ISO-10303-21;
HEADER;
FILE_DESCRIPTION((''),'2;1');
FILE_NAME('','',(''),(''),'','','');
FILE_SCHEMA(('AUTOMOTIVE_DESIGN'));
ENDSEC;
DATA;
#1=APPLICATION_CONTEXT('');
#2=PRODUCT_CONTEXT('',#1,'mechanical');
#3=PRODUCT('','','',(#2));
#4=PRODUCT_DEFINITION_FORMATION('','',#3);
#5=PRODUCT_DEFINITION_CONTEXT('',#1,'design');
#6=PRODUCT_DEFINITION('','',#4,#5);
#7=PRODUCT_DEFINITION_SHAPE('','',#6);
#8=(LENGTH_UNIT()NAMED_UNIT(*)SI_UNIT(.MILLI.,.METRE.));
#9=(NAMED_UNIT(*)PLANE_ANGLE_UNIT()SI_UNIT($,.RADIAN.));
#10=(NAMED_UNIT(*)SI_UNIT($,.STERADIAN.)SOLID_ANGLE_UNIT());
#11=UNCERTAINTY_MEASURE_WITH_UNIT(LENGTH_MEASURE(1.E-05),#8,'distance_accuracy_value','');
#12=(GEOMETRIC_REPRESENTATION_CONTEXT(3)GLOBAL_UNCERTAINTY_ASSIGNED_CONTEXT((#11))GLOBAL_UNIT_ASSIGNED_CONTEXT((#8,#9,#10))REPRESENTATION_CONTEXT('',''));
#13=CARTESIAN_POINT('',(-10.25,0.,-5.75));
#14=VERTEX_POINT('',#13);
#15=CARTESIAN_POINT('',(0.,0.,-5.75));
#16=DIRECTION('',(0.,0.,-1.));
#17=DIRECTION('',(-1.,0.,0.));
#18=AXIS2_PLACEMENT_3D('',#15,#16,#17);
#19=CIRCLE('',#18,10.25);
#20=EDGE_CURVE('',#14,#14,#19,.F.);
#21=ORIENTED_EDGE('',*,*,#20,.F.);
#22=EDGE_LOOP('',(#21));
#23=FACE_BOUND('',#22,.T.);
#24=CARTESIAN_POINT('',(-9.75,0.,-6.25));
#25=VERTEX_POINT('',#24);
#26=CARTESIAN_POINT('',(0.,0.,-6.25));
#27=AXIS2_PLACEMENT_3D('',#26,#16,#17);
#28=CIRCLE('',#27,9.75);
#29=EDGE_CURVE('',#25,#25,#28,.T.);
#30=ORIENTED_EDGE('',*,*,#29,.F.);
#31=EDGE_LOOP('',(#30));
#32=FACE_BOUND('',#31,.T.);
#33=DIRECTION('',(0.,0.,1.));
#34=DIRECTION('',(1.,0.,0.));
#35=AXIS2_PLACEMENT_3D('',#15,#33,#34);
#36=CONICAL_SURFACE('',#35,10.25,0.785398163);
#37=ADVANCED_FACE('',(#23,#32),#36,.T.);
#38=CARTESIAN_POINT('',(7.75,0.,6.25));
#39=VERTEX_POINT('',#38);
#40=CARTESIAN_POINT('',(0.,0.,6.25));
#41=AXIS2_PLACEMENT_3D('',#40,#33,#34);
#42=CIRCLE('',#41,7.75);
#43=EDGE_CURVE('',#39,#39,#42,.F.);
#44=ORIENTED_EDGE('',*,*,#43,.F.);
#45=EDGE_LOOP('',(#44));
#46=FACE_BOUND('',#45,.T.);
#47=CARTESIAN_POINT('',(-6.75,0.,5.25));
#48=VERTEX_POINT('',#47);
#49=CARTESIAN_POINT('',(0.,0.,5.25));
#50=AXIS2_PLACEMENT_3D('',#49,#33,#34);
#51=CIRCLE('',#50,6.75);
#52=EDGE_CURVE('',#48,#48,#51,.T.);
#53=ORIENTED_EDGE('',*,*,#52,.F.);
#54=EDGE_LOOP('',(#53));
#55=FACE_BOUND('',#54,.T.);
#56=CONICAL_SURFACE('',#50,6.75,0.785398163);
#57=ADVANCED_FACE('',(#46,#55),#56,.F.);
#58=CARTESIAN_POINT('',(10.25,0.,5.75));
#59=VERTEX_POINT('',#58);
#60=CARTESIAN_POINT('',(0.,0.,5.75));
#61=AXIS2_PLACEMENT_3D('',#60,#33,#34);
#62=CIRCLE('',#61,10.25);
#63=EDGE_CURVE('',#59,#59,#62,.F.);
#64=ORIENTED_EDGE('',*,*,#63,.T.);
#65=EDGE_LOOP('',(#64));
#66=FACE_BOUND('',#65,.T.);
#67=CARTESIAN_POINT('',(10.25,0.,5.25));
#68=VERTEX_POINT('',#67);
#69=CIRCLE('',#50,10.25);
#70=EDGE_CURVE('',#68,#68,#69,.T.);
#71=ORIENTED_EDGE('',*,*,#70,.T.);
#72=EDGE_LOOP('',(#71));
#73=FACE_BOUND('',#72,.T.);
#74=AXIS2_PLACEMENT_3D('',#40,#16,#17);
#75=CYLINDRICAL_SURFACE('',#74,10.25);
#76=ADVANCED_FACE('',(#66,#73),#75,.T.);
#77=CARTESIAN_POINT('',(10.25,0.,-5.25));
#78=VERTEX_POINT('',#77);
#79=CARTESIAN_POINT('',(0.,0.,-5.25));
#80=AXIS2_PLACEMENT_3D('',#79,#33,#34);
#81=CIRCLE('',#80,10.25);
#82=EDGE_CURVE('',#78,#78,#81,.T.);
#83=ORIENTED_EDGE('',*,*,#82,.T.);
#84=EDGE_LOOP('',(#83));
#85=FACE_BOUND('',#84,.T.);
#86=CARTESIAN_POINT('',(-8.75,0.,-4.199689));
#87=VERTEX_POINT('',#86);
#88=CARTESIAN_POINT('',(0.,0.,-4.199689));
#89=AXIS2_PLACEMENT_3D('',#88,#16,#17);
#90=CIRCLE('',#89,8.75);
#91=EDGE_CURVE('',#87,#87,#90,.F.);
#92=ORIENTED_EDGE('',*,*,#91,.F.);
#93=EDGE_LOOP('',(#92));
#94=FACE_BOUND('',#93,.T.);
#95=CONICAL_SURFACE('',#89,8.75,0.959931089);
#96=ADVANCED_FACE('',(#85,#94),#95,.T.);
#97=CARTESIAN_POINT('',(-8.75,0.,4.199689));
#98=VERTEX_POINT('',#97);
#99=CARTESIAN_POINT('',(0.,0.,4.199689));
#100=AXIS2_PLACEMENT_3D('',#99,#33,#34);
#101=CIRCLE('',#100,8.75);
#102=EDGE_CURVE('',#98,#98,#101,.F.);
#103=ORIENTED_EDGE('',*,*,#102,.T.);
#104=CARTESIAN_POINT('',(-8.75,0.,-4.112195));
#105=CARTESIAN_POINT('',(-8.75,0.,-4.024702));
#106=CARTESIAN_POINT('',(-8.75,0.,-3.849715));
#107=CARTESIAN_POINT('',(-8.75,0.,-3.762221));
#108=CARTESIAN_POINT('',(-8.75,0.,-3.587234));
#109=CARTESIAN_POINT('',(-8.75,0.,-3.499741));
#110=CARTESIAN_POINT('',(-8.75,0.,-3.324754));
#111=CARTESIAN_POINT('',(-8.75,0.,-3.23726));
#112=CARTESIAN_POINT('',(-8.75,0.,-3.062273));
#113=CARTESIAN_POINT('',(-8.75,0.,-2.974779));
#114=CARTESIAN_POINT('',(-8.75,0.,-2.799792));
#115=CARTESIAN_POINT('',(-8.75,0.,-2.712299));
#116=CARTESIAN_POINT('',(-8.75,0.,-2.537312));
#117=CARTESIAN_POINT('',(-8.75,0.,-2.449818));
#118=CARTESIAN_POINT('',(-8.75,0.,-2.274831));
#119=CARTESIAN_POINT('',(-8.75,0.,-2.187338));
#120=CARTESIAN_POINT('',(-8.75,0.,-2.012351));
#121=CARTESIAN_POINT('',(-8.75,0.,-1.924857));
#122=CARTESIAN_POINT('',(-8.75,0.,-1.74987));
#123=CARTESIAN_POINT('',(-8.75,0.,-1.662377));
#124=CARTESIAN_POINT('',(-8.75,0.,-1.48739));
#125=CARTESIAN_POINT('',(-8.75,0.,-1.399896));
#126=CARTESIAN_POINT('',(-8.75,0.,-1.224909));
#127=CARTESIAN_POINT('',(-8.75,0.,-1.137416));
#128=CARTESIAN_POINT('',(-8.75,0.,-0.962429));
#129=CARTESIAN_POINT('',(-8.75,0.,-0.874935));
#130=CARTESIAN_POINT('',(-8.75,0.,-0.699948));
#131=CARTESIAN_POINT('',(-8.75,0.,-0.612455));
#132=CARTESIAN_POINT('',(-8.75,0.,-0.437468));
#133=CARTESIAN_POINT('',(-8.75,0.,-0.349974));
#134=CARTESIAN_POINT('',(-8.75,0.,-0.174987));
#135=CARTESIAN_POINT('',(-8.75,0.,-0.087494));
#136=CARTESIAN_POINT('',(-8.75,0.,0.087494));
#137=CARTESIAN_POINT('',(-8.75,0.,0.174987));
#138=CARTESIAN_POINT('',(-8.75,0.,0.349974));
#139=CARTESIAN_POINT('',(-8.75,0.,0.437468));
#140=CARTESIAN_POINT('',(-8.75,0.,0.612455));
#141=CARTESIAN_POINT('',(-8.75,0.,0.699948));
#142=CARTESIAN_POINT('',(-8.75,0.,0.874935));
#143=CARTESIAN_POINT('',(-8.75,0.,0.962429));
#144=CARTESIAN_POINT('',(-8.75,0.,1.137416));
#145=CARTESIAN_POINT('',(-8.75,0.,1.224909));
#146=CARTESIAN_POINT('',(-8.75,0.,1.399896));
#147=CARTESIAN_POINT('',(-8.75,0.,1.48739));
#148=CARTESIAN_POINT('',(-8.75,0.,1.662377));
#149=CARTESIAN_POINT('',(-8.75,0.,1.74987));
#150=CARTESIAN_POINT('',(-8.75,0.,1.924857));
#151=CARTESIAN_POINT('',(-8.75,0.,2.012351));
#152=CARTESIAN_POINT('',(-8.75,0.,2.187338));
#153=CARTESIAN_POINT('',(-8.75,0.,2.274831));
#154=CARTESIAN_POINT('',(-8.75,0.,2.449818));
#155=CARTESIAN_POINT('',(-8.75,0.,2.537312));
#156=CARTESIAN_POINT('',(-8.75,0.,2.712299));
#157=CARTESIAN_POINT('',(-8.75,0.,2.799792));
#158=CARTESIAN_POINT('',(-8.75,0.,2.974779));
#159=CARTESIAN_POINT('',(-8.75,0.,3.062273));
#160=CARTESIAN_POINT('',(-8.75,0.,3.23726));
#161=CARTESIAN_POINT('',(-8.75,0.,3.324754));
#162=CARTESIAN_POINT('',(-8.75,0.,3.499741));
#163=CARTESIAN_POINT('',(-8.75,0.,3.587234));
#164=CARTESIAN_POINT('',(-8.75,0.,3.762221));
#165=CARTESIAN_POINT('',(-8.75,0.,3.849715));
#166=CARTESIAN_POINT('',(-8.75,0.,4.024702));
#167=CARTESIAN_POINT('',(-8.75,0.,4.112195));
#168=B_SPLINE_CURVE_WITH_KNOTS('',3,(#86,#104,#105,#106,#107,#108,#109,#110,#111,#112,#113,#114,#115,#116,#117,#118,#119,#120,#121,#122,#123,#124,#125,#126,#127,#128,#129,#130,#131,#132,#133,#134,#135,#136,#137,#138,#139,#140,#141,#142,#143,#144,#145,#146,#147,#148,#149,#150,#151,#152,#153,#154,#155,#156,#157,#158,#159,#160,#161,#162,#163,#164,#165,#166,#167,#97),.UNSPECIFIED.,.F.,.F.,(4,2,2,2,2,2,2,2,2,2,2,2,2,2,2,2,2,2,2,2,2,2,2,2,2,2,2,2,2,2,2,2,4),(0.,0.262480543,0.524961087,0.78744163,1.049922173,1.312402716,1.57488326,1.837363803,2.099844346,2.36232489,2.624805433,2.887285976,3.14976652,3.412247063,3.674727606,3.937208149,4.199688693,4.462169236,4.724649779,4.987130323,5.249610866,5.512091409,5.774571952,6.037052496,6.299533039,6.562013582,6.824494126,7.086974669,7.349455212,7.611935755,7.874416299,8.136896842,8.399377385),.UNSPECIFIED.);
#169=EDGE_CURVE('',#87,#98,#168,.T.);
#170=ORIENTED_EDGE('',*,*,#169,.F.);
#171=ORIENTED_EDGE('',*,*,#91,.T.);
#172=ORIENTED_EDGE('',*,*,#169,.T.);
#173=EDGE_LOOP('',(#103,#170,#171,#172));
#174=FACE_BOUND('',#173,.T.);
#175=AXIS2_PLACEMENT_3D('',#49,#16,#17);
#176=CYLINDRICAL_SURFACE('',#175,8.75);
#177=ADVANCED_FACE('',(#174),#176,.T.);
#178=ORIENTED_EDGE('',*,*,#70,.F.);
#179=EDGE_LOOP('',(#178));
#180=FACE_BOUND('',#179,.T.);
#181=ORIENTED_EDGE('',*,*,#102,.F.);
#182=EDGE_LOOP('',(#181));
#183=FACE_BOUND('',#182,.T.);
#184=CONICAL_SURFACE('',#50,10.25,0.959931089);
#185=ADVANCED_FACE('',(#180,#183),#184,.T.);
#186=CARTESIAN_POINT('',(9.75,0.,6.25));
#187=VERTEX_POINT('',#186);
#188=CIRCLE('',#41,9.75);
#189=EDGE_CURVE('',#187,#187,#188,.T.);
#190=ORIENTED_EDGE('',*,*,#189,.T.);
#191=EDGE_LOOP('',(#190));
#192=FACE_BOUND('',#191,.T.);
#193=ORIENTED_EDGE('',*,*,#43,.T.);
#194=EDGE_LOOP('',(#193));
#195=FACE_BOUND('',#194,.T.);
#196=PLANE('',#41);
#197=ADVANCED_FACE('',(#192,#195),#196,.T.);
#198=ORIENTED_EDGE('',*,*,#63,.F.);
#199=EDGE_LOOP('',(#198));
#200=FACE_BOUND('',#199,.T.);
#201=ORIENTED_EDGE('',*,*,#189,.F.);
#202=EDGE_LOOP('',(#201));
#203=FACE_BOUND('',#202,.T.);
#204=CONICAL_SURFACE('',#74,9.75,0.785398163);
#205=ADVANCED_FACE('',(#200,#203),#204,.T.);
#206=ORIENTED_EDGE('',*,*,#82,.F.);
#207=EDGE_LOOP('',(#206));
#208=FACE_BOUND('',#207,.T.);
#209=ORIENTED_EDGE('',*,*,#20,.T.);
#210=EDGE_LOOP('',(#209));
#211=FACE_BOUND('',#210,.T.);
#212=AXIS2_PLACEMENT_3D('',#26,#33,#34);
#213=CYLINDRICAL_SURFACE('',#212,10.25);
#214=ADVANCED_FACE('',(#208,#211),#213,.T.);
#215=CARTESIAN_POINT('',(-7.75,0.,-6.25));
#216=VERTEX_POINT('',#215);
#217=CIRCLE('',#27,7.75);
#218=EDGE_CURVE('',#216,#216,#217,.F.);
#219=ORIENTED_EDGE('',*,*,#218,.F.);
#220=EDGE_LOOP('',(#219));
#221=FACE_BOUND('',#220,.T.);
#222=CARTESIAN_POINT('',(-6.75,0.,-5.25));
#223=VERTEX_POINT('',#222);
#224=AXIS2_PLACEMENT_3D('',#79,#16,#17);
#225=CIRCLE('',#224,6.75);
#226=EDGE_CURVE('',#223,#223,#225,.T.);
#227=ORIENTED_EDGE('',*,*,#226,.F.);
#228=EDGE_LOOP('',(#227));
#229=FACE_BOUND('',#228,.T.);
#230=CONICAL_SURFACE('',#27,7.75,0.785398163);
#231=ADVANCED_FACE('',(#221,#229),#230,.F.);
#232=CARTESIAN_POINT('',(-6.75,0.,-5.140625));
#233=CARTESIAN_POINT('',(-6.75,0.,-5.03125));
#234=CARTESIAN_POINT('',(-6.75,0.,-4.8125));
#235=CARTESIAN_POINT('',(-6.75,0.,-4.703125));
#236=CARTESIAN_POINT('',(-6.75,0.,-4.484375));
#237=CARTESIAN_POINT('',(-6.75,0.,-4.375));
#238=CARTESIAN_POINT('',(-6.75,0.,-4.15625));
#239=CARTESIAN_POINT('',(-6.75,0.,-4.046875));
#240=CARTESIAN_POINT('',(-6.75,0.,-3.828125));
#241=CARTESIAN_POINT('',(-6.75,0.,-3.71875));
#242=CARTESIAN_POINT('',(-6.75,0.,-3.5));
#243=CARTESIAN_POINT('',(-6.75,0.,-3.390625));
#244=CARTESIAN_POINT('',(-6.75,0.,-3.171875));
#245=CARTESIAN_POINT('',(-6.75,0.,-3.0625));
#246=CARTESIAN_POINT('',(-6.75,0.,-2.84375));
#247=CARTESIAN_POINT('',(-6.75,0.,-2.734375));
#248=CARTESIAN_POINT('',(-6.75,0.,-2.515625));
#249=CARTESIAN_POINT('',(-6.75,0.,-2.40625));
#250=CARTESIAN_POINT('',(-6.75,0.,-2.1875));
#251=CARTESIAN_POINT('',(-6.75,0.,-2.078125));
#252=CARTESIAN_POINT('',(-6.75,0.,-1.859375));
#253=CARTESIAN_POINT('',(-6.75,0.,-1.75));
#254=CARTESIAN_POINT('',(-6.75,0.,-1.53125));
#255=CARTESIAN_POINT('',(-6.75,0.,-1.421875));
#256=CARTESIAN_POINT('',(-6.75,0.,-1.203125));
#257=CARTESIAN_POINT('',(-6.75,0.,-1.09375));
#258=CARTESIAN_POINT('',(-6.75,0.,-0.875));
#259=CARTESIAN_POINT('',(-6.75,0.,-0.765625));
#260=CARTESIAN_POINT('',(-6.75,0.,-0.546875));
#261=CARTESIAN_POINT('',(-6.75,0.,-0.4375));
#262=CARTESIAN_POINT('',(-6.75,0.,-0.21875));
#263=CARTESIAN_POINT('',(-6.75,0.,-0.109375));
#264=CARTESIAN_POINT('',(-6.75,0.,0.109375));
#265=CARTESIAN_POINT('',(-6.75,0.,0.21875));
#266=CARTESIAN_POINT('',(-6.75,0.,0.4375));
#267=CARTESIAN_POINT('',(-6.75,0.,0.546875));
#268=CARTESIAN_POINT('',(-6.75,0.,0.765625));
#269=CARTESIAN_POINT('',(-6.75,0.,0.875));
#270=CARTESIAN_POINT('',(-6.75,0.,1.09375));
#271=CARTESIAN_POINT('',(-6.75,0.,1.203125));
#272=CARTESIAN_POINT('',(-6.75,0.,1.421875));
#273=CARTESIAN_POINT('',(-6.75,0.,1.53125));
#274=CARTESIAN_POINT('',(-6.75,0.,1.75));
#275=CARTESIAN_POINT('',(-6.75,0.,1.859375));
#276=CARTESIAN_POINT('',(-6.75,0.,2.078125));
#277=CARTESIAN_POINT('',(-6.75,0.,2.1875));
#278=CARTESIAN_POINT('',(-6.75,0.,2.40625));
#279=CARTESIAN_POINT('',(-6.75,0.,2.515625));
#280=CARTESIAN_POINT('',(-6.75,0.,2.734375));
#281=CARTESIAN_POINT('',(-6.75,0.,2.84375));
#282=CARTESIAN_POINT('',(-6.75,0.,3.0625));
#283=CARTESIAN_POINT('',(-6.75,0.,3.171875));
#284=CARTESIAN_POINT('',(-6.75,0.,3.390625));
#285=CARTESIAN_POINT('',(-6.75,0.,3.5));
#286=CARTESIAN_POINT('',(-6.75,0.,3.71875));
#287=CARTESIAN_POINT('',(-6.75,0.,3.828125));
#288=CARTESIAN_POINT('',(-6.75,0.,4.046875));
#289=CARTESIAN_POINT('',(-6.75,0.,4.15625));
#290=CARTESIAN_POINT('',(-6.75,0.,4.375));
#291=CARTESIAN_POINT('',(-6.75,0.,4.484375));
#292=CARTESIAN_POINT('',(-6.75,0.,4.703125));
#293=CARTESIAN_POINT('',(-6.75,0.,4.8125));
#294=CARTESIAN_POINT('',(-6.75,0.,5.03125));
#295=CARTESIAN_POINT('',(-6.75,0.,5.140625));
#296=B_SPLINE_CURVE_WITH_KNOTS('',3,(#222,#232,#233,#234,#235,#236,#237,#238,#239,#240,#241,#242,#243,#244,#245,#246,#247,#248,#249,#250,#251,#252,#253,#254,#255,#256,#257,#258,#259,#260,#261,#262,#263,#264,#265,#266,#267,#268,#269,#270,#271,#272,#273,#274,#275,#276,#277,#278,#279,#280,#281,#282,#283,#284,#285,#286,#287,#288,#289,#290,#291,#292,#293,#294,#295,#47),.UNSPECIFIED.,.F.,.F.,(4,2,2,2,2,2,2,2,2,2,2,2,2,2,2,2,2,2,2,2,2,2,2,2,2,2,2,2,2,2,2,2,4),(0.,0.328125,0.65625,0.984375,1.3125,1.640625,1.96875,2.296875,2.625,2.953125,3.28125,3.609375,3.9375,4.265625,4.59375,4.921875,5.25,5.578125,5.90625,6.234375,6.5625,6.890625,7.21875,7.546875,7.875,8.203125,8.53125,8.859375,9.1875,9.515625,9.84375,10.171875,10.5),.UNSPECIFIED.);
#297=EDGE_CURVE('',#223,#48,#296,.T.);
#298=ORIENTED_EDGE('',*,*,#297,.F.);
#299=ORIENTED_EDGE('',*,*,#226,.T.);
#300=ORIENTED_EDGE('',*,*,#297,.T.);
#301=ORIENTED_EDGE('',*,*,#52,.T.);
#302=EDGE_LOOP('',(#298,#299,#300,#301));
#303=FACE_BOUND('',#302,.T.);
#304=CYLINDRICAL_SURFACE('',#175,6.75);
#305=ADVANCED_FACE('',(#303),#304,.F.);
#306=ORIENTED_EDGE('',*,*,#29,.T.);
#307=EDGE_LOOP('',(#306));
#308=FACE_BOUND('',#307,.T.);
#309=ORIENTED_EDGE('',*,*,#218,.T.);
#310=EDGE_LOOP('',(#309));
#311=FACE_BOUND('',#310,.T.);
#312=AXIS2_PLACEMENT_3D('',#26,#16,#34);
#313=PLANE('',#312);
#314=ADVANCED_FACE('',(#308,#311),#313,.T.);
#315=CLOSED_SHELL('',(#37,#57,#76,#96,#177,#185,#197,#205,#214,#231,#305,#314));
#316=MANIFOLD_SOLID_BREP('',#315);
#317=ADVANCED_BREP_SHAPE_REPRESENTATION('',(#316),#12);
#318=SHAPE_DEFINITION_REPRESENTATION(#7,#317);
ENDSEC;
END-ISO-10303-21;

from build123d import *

# Parameters (mm, degrees)
SKETCH1_R           = 8.75
SKETCH1_R_2         = 6.75
BOSS_EXTRUDE1_DEPTH = 5.25
SKETCH2_R           = 10.25
SKETCH2_R_2         = 6.75
BOSS_EXTRUDE2_DEPTH = 1
CHAMFER1_SIZE       = 1.050311307
CHAMFER1_SIZE_2     = 1.5
CHAMFER2_SIZE       = 1
CHAMFER3_SIZE       = 0.5


with BuildPart() as part:
    # Sketch1 → Boss-Extrude1 (new, symmetric)
    with BuildSketch(Plane.XY):
        with Locations(Location((0, 0, 0), (0, 0, 180))):
            Circle(SKETCH1_R)
        with Locations(Location((0, 0, 0), (0, 0, 180))):
            Circle(SKETCH1_R_2, mode=Mode.SUBTRACT)
    extrude(amount=BOSS_EXTRUDE1_DEPTH, both=True)

    # Sketch2 → Boss-Extrude2 (add)
    with BuildSketch(Plane.XY.offset(5.25)):
        Circle(SKETCH2_R)
        with Locations(Location((0, 0, 0), (0, 0, 180))):
            Circle(SKETCH2_R_2, mode=Mode.SUBTRACT)
    boss_extrude2 = extrude(amount=BOSS_EXTRUDE2_DEPTH)

    # Mirror1: Boss-Extrude2 across plane
    add(boss_extrude2.mirror(Plane.XY))

    # Chamfer1
    # the kernel refuses this chamfer: 1.5, 1.050311307 mm, written as the material it adds along each edge
    with BuildSketch(Plane(origin=(0, 0, -5.25), x_dir=(-1, 0, 0), z_dir=(0, 1, 0))) as chamfer1_piece_1_section:
        Polygon((8.75, CHAMFER1_SIZE), (8.75 + CHAMFER1_SIZE_2, 0), (8.75, 0), align=None)
    chamfer1_piece_1 = revolve(axis=Axis((0, 0, -5.25), (0, 0, 1)), mode=Mode.PRIVATE)
    chamfer1_piece_1 = chamfer1_piece_1 & Plane(origin=(0, 0, -4.738052243), x_dir=(1, 0, 0), z_dir=(0, 0, 1)) * Cylinder(10.25, 42, mode=Mode.PRIVATE)
    add(chamfer1_piece_1)
    with BuildSketch(Plane(origin=(0, 0, 5.25), x_dir=(-1, 0, 0), z_dir=(0, 1, 0))) as chamfer1_piece_2_section:
        Polygon((8.75, -CHAMFER1_SIZE), (8.75 + CHAMFER1_SIZE_2, 0), (8.75, 0), align=None)
    chamfer1_piece_2 = revolve(axis=Axis((0, 0, 5.25), (0, 0, 1)), mode=Mode.PRIVATE)
    chamfer1_piece_2 = chamfer1_piece_2 & Plane(origin=(0, 0, 4.738052243), x_dir=(1, 0, 0), z_dir=(0, 0, -1)) * Cylinder(10.25, 42, mode=Mode.PRIVATE)
    add(chamfer1_piece_2)

    # Chamfer2
    chamfer2_edges = [part.edges().sort_by_distance(p)[0] for p in [
        (6.75, 0, 6.25),
        (6.75, 0, -6.25),
    ]]
    chamfer(chamfer2_edges, length=CHAMFER2_SIZE)

    # Chamfer3
    chamfer3_edges = [part.edges().sort_by_distance(p)[0] for p in [
        (-10.25, 0, 6.25),
        (-10.25, 0, -6.25),
    ]]
    chamfer(chamfer3_edges, length=CHAMFER3_SIZE)


solid = part.part
